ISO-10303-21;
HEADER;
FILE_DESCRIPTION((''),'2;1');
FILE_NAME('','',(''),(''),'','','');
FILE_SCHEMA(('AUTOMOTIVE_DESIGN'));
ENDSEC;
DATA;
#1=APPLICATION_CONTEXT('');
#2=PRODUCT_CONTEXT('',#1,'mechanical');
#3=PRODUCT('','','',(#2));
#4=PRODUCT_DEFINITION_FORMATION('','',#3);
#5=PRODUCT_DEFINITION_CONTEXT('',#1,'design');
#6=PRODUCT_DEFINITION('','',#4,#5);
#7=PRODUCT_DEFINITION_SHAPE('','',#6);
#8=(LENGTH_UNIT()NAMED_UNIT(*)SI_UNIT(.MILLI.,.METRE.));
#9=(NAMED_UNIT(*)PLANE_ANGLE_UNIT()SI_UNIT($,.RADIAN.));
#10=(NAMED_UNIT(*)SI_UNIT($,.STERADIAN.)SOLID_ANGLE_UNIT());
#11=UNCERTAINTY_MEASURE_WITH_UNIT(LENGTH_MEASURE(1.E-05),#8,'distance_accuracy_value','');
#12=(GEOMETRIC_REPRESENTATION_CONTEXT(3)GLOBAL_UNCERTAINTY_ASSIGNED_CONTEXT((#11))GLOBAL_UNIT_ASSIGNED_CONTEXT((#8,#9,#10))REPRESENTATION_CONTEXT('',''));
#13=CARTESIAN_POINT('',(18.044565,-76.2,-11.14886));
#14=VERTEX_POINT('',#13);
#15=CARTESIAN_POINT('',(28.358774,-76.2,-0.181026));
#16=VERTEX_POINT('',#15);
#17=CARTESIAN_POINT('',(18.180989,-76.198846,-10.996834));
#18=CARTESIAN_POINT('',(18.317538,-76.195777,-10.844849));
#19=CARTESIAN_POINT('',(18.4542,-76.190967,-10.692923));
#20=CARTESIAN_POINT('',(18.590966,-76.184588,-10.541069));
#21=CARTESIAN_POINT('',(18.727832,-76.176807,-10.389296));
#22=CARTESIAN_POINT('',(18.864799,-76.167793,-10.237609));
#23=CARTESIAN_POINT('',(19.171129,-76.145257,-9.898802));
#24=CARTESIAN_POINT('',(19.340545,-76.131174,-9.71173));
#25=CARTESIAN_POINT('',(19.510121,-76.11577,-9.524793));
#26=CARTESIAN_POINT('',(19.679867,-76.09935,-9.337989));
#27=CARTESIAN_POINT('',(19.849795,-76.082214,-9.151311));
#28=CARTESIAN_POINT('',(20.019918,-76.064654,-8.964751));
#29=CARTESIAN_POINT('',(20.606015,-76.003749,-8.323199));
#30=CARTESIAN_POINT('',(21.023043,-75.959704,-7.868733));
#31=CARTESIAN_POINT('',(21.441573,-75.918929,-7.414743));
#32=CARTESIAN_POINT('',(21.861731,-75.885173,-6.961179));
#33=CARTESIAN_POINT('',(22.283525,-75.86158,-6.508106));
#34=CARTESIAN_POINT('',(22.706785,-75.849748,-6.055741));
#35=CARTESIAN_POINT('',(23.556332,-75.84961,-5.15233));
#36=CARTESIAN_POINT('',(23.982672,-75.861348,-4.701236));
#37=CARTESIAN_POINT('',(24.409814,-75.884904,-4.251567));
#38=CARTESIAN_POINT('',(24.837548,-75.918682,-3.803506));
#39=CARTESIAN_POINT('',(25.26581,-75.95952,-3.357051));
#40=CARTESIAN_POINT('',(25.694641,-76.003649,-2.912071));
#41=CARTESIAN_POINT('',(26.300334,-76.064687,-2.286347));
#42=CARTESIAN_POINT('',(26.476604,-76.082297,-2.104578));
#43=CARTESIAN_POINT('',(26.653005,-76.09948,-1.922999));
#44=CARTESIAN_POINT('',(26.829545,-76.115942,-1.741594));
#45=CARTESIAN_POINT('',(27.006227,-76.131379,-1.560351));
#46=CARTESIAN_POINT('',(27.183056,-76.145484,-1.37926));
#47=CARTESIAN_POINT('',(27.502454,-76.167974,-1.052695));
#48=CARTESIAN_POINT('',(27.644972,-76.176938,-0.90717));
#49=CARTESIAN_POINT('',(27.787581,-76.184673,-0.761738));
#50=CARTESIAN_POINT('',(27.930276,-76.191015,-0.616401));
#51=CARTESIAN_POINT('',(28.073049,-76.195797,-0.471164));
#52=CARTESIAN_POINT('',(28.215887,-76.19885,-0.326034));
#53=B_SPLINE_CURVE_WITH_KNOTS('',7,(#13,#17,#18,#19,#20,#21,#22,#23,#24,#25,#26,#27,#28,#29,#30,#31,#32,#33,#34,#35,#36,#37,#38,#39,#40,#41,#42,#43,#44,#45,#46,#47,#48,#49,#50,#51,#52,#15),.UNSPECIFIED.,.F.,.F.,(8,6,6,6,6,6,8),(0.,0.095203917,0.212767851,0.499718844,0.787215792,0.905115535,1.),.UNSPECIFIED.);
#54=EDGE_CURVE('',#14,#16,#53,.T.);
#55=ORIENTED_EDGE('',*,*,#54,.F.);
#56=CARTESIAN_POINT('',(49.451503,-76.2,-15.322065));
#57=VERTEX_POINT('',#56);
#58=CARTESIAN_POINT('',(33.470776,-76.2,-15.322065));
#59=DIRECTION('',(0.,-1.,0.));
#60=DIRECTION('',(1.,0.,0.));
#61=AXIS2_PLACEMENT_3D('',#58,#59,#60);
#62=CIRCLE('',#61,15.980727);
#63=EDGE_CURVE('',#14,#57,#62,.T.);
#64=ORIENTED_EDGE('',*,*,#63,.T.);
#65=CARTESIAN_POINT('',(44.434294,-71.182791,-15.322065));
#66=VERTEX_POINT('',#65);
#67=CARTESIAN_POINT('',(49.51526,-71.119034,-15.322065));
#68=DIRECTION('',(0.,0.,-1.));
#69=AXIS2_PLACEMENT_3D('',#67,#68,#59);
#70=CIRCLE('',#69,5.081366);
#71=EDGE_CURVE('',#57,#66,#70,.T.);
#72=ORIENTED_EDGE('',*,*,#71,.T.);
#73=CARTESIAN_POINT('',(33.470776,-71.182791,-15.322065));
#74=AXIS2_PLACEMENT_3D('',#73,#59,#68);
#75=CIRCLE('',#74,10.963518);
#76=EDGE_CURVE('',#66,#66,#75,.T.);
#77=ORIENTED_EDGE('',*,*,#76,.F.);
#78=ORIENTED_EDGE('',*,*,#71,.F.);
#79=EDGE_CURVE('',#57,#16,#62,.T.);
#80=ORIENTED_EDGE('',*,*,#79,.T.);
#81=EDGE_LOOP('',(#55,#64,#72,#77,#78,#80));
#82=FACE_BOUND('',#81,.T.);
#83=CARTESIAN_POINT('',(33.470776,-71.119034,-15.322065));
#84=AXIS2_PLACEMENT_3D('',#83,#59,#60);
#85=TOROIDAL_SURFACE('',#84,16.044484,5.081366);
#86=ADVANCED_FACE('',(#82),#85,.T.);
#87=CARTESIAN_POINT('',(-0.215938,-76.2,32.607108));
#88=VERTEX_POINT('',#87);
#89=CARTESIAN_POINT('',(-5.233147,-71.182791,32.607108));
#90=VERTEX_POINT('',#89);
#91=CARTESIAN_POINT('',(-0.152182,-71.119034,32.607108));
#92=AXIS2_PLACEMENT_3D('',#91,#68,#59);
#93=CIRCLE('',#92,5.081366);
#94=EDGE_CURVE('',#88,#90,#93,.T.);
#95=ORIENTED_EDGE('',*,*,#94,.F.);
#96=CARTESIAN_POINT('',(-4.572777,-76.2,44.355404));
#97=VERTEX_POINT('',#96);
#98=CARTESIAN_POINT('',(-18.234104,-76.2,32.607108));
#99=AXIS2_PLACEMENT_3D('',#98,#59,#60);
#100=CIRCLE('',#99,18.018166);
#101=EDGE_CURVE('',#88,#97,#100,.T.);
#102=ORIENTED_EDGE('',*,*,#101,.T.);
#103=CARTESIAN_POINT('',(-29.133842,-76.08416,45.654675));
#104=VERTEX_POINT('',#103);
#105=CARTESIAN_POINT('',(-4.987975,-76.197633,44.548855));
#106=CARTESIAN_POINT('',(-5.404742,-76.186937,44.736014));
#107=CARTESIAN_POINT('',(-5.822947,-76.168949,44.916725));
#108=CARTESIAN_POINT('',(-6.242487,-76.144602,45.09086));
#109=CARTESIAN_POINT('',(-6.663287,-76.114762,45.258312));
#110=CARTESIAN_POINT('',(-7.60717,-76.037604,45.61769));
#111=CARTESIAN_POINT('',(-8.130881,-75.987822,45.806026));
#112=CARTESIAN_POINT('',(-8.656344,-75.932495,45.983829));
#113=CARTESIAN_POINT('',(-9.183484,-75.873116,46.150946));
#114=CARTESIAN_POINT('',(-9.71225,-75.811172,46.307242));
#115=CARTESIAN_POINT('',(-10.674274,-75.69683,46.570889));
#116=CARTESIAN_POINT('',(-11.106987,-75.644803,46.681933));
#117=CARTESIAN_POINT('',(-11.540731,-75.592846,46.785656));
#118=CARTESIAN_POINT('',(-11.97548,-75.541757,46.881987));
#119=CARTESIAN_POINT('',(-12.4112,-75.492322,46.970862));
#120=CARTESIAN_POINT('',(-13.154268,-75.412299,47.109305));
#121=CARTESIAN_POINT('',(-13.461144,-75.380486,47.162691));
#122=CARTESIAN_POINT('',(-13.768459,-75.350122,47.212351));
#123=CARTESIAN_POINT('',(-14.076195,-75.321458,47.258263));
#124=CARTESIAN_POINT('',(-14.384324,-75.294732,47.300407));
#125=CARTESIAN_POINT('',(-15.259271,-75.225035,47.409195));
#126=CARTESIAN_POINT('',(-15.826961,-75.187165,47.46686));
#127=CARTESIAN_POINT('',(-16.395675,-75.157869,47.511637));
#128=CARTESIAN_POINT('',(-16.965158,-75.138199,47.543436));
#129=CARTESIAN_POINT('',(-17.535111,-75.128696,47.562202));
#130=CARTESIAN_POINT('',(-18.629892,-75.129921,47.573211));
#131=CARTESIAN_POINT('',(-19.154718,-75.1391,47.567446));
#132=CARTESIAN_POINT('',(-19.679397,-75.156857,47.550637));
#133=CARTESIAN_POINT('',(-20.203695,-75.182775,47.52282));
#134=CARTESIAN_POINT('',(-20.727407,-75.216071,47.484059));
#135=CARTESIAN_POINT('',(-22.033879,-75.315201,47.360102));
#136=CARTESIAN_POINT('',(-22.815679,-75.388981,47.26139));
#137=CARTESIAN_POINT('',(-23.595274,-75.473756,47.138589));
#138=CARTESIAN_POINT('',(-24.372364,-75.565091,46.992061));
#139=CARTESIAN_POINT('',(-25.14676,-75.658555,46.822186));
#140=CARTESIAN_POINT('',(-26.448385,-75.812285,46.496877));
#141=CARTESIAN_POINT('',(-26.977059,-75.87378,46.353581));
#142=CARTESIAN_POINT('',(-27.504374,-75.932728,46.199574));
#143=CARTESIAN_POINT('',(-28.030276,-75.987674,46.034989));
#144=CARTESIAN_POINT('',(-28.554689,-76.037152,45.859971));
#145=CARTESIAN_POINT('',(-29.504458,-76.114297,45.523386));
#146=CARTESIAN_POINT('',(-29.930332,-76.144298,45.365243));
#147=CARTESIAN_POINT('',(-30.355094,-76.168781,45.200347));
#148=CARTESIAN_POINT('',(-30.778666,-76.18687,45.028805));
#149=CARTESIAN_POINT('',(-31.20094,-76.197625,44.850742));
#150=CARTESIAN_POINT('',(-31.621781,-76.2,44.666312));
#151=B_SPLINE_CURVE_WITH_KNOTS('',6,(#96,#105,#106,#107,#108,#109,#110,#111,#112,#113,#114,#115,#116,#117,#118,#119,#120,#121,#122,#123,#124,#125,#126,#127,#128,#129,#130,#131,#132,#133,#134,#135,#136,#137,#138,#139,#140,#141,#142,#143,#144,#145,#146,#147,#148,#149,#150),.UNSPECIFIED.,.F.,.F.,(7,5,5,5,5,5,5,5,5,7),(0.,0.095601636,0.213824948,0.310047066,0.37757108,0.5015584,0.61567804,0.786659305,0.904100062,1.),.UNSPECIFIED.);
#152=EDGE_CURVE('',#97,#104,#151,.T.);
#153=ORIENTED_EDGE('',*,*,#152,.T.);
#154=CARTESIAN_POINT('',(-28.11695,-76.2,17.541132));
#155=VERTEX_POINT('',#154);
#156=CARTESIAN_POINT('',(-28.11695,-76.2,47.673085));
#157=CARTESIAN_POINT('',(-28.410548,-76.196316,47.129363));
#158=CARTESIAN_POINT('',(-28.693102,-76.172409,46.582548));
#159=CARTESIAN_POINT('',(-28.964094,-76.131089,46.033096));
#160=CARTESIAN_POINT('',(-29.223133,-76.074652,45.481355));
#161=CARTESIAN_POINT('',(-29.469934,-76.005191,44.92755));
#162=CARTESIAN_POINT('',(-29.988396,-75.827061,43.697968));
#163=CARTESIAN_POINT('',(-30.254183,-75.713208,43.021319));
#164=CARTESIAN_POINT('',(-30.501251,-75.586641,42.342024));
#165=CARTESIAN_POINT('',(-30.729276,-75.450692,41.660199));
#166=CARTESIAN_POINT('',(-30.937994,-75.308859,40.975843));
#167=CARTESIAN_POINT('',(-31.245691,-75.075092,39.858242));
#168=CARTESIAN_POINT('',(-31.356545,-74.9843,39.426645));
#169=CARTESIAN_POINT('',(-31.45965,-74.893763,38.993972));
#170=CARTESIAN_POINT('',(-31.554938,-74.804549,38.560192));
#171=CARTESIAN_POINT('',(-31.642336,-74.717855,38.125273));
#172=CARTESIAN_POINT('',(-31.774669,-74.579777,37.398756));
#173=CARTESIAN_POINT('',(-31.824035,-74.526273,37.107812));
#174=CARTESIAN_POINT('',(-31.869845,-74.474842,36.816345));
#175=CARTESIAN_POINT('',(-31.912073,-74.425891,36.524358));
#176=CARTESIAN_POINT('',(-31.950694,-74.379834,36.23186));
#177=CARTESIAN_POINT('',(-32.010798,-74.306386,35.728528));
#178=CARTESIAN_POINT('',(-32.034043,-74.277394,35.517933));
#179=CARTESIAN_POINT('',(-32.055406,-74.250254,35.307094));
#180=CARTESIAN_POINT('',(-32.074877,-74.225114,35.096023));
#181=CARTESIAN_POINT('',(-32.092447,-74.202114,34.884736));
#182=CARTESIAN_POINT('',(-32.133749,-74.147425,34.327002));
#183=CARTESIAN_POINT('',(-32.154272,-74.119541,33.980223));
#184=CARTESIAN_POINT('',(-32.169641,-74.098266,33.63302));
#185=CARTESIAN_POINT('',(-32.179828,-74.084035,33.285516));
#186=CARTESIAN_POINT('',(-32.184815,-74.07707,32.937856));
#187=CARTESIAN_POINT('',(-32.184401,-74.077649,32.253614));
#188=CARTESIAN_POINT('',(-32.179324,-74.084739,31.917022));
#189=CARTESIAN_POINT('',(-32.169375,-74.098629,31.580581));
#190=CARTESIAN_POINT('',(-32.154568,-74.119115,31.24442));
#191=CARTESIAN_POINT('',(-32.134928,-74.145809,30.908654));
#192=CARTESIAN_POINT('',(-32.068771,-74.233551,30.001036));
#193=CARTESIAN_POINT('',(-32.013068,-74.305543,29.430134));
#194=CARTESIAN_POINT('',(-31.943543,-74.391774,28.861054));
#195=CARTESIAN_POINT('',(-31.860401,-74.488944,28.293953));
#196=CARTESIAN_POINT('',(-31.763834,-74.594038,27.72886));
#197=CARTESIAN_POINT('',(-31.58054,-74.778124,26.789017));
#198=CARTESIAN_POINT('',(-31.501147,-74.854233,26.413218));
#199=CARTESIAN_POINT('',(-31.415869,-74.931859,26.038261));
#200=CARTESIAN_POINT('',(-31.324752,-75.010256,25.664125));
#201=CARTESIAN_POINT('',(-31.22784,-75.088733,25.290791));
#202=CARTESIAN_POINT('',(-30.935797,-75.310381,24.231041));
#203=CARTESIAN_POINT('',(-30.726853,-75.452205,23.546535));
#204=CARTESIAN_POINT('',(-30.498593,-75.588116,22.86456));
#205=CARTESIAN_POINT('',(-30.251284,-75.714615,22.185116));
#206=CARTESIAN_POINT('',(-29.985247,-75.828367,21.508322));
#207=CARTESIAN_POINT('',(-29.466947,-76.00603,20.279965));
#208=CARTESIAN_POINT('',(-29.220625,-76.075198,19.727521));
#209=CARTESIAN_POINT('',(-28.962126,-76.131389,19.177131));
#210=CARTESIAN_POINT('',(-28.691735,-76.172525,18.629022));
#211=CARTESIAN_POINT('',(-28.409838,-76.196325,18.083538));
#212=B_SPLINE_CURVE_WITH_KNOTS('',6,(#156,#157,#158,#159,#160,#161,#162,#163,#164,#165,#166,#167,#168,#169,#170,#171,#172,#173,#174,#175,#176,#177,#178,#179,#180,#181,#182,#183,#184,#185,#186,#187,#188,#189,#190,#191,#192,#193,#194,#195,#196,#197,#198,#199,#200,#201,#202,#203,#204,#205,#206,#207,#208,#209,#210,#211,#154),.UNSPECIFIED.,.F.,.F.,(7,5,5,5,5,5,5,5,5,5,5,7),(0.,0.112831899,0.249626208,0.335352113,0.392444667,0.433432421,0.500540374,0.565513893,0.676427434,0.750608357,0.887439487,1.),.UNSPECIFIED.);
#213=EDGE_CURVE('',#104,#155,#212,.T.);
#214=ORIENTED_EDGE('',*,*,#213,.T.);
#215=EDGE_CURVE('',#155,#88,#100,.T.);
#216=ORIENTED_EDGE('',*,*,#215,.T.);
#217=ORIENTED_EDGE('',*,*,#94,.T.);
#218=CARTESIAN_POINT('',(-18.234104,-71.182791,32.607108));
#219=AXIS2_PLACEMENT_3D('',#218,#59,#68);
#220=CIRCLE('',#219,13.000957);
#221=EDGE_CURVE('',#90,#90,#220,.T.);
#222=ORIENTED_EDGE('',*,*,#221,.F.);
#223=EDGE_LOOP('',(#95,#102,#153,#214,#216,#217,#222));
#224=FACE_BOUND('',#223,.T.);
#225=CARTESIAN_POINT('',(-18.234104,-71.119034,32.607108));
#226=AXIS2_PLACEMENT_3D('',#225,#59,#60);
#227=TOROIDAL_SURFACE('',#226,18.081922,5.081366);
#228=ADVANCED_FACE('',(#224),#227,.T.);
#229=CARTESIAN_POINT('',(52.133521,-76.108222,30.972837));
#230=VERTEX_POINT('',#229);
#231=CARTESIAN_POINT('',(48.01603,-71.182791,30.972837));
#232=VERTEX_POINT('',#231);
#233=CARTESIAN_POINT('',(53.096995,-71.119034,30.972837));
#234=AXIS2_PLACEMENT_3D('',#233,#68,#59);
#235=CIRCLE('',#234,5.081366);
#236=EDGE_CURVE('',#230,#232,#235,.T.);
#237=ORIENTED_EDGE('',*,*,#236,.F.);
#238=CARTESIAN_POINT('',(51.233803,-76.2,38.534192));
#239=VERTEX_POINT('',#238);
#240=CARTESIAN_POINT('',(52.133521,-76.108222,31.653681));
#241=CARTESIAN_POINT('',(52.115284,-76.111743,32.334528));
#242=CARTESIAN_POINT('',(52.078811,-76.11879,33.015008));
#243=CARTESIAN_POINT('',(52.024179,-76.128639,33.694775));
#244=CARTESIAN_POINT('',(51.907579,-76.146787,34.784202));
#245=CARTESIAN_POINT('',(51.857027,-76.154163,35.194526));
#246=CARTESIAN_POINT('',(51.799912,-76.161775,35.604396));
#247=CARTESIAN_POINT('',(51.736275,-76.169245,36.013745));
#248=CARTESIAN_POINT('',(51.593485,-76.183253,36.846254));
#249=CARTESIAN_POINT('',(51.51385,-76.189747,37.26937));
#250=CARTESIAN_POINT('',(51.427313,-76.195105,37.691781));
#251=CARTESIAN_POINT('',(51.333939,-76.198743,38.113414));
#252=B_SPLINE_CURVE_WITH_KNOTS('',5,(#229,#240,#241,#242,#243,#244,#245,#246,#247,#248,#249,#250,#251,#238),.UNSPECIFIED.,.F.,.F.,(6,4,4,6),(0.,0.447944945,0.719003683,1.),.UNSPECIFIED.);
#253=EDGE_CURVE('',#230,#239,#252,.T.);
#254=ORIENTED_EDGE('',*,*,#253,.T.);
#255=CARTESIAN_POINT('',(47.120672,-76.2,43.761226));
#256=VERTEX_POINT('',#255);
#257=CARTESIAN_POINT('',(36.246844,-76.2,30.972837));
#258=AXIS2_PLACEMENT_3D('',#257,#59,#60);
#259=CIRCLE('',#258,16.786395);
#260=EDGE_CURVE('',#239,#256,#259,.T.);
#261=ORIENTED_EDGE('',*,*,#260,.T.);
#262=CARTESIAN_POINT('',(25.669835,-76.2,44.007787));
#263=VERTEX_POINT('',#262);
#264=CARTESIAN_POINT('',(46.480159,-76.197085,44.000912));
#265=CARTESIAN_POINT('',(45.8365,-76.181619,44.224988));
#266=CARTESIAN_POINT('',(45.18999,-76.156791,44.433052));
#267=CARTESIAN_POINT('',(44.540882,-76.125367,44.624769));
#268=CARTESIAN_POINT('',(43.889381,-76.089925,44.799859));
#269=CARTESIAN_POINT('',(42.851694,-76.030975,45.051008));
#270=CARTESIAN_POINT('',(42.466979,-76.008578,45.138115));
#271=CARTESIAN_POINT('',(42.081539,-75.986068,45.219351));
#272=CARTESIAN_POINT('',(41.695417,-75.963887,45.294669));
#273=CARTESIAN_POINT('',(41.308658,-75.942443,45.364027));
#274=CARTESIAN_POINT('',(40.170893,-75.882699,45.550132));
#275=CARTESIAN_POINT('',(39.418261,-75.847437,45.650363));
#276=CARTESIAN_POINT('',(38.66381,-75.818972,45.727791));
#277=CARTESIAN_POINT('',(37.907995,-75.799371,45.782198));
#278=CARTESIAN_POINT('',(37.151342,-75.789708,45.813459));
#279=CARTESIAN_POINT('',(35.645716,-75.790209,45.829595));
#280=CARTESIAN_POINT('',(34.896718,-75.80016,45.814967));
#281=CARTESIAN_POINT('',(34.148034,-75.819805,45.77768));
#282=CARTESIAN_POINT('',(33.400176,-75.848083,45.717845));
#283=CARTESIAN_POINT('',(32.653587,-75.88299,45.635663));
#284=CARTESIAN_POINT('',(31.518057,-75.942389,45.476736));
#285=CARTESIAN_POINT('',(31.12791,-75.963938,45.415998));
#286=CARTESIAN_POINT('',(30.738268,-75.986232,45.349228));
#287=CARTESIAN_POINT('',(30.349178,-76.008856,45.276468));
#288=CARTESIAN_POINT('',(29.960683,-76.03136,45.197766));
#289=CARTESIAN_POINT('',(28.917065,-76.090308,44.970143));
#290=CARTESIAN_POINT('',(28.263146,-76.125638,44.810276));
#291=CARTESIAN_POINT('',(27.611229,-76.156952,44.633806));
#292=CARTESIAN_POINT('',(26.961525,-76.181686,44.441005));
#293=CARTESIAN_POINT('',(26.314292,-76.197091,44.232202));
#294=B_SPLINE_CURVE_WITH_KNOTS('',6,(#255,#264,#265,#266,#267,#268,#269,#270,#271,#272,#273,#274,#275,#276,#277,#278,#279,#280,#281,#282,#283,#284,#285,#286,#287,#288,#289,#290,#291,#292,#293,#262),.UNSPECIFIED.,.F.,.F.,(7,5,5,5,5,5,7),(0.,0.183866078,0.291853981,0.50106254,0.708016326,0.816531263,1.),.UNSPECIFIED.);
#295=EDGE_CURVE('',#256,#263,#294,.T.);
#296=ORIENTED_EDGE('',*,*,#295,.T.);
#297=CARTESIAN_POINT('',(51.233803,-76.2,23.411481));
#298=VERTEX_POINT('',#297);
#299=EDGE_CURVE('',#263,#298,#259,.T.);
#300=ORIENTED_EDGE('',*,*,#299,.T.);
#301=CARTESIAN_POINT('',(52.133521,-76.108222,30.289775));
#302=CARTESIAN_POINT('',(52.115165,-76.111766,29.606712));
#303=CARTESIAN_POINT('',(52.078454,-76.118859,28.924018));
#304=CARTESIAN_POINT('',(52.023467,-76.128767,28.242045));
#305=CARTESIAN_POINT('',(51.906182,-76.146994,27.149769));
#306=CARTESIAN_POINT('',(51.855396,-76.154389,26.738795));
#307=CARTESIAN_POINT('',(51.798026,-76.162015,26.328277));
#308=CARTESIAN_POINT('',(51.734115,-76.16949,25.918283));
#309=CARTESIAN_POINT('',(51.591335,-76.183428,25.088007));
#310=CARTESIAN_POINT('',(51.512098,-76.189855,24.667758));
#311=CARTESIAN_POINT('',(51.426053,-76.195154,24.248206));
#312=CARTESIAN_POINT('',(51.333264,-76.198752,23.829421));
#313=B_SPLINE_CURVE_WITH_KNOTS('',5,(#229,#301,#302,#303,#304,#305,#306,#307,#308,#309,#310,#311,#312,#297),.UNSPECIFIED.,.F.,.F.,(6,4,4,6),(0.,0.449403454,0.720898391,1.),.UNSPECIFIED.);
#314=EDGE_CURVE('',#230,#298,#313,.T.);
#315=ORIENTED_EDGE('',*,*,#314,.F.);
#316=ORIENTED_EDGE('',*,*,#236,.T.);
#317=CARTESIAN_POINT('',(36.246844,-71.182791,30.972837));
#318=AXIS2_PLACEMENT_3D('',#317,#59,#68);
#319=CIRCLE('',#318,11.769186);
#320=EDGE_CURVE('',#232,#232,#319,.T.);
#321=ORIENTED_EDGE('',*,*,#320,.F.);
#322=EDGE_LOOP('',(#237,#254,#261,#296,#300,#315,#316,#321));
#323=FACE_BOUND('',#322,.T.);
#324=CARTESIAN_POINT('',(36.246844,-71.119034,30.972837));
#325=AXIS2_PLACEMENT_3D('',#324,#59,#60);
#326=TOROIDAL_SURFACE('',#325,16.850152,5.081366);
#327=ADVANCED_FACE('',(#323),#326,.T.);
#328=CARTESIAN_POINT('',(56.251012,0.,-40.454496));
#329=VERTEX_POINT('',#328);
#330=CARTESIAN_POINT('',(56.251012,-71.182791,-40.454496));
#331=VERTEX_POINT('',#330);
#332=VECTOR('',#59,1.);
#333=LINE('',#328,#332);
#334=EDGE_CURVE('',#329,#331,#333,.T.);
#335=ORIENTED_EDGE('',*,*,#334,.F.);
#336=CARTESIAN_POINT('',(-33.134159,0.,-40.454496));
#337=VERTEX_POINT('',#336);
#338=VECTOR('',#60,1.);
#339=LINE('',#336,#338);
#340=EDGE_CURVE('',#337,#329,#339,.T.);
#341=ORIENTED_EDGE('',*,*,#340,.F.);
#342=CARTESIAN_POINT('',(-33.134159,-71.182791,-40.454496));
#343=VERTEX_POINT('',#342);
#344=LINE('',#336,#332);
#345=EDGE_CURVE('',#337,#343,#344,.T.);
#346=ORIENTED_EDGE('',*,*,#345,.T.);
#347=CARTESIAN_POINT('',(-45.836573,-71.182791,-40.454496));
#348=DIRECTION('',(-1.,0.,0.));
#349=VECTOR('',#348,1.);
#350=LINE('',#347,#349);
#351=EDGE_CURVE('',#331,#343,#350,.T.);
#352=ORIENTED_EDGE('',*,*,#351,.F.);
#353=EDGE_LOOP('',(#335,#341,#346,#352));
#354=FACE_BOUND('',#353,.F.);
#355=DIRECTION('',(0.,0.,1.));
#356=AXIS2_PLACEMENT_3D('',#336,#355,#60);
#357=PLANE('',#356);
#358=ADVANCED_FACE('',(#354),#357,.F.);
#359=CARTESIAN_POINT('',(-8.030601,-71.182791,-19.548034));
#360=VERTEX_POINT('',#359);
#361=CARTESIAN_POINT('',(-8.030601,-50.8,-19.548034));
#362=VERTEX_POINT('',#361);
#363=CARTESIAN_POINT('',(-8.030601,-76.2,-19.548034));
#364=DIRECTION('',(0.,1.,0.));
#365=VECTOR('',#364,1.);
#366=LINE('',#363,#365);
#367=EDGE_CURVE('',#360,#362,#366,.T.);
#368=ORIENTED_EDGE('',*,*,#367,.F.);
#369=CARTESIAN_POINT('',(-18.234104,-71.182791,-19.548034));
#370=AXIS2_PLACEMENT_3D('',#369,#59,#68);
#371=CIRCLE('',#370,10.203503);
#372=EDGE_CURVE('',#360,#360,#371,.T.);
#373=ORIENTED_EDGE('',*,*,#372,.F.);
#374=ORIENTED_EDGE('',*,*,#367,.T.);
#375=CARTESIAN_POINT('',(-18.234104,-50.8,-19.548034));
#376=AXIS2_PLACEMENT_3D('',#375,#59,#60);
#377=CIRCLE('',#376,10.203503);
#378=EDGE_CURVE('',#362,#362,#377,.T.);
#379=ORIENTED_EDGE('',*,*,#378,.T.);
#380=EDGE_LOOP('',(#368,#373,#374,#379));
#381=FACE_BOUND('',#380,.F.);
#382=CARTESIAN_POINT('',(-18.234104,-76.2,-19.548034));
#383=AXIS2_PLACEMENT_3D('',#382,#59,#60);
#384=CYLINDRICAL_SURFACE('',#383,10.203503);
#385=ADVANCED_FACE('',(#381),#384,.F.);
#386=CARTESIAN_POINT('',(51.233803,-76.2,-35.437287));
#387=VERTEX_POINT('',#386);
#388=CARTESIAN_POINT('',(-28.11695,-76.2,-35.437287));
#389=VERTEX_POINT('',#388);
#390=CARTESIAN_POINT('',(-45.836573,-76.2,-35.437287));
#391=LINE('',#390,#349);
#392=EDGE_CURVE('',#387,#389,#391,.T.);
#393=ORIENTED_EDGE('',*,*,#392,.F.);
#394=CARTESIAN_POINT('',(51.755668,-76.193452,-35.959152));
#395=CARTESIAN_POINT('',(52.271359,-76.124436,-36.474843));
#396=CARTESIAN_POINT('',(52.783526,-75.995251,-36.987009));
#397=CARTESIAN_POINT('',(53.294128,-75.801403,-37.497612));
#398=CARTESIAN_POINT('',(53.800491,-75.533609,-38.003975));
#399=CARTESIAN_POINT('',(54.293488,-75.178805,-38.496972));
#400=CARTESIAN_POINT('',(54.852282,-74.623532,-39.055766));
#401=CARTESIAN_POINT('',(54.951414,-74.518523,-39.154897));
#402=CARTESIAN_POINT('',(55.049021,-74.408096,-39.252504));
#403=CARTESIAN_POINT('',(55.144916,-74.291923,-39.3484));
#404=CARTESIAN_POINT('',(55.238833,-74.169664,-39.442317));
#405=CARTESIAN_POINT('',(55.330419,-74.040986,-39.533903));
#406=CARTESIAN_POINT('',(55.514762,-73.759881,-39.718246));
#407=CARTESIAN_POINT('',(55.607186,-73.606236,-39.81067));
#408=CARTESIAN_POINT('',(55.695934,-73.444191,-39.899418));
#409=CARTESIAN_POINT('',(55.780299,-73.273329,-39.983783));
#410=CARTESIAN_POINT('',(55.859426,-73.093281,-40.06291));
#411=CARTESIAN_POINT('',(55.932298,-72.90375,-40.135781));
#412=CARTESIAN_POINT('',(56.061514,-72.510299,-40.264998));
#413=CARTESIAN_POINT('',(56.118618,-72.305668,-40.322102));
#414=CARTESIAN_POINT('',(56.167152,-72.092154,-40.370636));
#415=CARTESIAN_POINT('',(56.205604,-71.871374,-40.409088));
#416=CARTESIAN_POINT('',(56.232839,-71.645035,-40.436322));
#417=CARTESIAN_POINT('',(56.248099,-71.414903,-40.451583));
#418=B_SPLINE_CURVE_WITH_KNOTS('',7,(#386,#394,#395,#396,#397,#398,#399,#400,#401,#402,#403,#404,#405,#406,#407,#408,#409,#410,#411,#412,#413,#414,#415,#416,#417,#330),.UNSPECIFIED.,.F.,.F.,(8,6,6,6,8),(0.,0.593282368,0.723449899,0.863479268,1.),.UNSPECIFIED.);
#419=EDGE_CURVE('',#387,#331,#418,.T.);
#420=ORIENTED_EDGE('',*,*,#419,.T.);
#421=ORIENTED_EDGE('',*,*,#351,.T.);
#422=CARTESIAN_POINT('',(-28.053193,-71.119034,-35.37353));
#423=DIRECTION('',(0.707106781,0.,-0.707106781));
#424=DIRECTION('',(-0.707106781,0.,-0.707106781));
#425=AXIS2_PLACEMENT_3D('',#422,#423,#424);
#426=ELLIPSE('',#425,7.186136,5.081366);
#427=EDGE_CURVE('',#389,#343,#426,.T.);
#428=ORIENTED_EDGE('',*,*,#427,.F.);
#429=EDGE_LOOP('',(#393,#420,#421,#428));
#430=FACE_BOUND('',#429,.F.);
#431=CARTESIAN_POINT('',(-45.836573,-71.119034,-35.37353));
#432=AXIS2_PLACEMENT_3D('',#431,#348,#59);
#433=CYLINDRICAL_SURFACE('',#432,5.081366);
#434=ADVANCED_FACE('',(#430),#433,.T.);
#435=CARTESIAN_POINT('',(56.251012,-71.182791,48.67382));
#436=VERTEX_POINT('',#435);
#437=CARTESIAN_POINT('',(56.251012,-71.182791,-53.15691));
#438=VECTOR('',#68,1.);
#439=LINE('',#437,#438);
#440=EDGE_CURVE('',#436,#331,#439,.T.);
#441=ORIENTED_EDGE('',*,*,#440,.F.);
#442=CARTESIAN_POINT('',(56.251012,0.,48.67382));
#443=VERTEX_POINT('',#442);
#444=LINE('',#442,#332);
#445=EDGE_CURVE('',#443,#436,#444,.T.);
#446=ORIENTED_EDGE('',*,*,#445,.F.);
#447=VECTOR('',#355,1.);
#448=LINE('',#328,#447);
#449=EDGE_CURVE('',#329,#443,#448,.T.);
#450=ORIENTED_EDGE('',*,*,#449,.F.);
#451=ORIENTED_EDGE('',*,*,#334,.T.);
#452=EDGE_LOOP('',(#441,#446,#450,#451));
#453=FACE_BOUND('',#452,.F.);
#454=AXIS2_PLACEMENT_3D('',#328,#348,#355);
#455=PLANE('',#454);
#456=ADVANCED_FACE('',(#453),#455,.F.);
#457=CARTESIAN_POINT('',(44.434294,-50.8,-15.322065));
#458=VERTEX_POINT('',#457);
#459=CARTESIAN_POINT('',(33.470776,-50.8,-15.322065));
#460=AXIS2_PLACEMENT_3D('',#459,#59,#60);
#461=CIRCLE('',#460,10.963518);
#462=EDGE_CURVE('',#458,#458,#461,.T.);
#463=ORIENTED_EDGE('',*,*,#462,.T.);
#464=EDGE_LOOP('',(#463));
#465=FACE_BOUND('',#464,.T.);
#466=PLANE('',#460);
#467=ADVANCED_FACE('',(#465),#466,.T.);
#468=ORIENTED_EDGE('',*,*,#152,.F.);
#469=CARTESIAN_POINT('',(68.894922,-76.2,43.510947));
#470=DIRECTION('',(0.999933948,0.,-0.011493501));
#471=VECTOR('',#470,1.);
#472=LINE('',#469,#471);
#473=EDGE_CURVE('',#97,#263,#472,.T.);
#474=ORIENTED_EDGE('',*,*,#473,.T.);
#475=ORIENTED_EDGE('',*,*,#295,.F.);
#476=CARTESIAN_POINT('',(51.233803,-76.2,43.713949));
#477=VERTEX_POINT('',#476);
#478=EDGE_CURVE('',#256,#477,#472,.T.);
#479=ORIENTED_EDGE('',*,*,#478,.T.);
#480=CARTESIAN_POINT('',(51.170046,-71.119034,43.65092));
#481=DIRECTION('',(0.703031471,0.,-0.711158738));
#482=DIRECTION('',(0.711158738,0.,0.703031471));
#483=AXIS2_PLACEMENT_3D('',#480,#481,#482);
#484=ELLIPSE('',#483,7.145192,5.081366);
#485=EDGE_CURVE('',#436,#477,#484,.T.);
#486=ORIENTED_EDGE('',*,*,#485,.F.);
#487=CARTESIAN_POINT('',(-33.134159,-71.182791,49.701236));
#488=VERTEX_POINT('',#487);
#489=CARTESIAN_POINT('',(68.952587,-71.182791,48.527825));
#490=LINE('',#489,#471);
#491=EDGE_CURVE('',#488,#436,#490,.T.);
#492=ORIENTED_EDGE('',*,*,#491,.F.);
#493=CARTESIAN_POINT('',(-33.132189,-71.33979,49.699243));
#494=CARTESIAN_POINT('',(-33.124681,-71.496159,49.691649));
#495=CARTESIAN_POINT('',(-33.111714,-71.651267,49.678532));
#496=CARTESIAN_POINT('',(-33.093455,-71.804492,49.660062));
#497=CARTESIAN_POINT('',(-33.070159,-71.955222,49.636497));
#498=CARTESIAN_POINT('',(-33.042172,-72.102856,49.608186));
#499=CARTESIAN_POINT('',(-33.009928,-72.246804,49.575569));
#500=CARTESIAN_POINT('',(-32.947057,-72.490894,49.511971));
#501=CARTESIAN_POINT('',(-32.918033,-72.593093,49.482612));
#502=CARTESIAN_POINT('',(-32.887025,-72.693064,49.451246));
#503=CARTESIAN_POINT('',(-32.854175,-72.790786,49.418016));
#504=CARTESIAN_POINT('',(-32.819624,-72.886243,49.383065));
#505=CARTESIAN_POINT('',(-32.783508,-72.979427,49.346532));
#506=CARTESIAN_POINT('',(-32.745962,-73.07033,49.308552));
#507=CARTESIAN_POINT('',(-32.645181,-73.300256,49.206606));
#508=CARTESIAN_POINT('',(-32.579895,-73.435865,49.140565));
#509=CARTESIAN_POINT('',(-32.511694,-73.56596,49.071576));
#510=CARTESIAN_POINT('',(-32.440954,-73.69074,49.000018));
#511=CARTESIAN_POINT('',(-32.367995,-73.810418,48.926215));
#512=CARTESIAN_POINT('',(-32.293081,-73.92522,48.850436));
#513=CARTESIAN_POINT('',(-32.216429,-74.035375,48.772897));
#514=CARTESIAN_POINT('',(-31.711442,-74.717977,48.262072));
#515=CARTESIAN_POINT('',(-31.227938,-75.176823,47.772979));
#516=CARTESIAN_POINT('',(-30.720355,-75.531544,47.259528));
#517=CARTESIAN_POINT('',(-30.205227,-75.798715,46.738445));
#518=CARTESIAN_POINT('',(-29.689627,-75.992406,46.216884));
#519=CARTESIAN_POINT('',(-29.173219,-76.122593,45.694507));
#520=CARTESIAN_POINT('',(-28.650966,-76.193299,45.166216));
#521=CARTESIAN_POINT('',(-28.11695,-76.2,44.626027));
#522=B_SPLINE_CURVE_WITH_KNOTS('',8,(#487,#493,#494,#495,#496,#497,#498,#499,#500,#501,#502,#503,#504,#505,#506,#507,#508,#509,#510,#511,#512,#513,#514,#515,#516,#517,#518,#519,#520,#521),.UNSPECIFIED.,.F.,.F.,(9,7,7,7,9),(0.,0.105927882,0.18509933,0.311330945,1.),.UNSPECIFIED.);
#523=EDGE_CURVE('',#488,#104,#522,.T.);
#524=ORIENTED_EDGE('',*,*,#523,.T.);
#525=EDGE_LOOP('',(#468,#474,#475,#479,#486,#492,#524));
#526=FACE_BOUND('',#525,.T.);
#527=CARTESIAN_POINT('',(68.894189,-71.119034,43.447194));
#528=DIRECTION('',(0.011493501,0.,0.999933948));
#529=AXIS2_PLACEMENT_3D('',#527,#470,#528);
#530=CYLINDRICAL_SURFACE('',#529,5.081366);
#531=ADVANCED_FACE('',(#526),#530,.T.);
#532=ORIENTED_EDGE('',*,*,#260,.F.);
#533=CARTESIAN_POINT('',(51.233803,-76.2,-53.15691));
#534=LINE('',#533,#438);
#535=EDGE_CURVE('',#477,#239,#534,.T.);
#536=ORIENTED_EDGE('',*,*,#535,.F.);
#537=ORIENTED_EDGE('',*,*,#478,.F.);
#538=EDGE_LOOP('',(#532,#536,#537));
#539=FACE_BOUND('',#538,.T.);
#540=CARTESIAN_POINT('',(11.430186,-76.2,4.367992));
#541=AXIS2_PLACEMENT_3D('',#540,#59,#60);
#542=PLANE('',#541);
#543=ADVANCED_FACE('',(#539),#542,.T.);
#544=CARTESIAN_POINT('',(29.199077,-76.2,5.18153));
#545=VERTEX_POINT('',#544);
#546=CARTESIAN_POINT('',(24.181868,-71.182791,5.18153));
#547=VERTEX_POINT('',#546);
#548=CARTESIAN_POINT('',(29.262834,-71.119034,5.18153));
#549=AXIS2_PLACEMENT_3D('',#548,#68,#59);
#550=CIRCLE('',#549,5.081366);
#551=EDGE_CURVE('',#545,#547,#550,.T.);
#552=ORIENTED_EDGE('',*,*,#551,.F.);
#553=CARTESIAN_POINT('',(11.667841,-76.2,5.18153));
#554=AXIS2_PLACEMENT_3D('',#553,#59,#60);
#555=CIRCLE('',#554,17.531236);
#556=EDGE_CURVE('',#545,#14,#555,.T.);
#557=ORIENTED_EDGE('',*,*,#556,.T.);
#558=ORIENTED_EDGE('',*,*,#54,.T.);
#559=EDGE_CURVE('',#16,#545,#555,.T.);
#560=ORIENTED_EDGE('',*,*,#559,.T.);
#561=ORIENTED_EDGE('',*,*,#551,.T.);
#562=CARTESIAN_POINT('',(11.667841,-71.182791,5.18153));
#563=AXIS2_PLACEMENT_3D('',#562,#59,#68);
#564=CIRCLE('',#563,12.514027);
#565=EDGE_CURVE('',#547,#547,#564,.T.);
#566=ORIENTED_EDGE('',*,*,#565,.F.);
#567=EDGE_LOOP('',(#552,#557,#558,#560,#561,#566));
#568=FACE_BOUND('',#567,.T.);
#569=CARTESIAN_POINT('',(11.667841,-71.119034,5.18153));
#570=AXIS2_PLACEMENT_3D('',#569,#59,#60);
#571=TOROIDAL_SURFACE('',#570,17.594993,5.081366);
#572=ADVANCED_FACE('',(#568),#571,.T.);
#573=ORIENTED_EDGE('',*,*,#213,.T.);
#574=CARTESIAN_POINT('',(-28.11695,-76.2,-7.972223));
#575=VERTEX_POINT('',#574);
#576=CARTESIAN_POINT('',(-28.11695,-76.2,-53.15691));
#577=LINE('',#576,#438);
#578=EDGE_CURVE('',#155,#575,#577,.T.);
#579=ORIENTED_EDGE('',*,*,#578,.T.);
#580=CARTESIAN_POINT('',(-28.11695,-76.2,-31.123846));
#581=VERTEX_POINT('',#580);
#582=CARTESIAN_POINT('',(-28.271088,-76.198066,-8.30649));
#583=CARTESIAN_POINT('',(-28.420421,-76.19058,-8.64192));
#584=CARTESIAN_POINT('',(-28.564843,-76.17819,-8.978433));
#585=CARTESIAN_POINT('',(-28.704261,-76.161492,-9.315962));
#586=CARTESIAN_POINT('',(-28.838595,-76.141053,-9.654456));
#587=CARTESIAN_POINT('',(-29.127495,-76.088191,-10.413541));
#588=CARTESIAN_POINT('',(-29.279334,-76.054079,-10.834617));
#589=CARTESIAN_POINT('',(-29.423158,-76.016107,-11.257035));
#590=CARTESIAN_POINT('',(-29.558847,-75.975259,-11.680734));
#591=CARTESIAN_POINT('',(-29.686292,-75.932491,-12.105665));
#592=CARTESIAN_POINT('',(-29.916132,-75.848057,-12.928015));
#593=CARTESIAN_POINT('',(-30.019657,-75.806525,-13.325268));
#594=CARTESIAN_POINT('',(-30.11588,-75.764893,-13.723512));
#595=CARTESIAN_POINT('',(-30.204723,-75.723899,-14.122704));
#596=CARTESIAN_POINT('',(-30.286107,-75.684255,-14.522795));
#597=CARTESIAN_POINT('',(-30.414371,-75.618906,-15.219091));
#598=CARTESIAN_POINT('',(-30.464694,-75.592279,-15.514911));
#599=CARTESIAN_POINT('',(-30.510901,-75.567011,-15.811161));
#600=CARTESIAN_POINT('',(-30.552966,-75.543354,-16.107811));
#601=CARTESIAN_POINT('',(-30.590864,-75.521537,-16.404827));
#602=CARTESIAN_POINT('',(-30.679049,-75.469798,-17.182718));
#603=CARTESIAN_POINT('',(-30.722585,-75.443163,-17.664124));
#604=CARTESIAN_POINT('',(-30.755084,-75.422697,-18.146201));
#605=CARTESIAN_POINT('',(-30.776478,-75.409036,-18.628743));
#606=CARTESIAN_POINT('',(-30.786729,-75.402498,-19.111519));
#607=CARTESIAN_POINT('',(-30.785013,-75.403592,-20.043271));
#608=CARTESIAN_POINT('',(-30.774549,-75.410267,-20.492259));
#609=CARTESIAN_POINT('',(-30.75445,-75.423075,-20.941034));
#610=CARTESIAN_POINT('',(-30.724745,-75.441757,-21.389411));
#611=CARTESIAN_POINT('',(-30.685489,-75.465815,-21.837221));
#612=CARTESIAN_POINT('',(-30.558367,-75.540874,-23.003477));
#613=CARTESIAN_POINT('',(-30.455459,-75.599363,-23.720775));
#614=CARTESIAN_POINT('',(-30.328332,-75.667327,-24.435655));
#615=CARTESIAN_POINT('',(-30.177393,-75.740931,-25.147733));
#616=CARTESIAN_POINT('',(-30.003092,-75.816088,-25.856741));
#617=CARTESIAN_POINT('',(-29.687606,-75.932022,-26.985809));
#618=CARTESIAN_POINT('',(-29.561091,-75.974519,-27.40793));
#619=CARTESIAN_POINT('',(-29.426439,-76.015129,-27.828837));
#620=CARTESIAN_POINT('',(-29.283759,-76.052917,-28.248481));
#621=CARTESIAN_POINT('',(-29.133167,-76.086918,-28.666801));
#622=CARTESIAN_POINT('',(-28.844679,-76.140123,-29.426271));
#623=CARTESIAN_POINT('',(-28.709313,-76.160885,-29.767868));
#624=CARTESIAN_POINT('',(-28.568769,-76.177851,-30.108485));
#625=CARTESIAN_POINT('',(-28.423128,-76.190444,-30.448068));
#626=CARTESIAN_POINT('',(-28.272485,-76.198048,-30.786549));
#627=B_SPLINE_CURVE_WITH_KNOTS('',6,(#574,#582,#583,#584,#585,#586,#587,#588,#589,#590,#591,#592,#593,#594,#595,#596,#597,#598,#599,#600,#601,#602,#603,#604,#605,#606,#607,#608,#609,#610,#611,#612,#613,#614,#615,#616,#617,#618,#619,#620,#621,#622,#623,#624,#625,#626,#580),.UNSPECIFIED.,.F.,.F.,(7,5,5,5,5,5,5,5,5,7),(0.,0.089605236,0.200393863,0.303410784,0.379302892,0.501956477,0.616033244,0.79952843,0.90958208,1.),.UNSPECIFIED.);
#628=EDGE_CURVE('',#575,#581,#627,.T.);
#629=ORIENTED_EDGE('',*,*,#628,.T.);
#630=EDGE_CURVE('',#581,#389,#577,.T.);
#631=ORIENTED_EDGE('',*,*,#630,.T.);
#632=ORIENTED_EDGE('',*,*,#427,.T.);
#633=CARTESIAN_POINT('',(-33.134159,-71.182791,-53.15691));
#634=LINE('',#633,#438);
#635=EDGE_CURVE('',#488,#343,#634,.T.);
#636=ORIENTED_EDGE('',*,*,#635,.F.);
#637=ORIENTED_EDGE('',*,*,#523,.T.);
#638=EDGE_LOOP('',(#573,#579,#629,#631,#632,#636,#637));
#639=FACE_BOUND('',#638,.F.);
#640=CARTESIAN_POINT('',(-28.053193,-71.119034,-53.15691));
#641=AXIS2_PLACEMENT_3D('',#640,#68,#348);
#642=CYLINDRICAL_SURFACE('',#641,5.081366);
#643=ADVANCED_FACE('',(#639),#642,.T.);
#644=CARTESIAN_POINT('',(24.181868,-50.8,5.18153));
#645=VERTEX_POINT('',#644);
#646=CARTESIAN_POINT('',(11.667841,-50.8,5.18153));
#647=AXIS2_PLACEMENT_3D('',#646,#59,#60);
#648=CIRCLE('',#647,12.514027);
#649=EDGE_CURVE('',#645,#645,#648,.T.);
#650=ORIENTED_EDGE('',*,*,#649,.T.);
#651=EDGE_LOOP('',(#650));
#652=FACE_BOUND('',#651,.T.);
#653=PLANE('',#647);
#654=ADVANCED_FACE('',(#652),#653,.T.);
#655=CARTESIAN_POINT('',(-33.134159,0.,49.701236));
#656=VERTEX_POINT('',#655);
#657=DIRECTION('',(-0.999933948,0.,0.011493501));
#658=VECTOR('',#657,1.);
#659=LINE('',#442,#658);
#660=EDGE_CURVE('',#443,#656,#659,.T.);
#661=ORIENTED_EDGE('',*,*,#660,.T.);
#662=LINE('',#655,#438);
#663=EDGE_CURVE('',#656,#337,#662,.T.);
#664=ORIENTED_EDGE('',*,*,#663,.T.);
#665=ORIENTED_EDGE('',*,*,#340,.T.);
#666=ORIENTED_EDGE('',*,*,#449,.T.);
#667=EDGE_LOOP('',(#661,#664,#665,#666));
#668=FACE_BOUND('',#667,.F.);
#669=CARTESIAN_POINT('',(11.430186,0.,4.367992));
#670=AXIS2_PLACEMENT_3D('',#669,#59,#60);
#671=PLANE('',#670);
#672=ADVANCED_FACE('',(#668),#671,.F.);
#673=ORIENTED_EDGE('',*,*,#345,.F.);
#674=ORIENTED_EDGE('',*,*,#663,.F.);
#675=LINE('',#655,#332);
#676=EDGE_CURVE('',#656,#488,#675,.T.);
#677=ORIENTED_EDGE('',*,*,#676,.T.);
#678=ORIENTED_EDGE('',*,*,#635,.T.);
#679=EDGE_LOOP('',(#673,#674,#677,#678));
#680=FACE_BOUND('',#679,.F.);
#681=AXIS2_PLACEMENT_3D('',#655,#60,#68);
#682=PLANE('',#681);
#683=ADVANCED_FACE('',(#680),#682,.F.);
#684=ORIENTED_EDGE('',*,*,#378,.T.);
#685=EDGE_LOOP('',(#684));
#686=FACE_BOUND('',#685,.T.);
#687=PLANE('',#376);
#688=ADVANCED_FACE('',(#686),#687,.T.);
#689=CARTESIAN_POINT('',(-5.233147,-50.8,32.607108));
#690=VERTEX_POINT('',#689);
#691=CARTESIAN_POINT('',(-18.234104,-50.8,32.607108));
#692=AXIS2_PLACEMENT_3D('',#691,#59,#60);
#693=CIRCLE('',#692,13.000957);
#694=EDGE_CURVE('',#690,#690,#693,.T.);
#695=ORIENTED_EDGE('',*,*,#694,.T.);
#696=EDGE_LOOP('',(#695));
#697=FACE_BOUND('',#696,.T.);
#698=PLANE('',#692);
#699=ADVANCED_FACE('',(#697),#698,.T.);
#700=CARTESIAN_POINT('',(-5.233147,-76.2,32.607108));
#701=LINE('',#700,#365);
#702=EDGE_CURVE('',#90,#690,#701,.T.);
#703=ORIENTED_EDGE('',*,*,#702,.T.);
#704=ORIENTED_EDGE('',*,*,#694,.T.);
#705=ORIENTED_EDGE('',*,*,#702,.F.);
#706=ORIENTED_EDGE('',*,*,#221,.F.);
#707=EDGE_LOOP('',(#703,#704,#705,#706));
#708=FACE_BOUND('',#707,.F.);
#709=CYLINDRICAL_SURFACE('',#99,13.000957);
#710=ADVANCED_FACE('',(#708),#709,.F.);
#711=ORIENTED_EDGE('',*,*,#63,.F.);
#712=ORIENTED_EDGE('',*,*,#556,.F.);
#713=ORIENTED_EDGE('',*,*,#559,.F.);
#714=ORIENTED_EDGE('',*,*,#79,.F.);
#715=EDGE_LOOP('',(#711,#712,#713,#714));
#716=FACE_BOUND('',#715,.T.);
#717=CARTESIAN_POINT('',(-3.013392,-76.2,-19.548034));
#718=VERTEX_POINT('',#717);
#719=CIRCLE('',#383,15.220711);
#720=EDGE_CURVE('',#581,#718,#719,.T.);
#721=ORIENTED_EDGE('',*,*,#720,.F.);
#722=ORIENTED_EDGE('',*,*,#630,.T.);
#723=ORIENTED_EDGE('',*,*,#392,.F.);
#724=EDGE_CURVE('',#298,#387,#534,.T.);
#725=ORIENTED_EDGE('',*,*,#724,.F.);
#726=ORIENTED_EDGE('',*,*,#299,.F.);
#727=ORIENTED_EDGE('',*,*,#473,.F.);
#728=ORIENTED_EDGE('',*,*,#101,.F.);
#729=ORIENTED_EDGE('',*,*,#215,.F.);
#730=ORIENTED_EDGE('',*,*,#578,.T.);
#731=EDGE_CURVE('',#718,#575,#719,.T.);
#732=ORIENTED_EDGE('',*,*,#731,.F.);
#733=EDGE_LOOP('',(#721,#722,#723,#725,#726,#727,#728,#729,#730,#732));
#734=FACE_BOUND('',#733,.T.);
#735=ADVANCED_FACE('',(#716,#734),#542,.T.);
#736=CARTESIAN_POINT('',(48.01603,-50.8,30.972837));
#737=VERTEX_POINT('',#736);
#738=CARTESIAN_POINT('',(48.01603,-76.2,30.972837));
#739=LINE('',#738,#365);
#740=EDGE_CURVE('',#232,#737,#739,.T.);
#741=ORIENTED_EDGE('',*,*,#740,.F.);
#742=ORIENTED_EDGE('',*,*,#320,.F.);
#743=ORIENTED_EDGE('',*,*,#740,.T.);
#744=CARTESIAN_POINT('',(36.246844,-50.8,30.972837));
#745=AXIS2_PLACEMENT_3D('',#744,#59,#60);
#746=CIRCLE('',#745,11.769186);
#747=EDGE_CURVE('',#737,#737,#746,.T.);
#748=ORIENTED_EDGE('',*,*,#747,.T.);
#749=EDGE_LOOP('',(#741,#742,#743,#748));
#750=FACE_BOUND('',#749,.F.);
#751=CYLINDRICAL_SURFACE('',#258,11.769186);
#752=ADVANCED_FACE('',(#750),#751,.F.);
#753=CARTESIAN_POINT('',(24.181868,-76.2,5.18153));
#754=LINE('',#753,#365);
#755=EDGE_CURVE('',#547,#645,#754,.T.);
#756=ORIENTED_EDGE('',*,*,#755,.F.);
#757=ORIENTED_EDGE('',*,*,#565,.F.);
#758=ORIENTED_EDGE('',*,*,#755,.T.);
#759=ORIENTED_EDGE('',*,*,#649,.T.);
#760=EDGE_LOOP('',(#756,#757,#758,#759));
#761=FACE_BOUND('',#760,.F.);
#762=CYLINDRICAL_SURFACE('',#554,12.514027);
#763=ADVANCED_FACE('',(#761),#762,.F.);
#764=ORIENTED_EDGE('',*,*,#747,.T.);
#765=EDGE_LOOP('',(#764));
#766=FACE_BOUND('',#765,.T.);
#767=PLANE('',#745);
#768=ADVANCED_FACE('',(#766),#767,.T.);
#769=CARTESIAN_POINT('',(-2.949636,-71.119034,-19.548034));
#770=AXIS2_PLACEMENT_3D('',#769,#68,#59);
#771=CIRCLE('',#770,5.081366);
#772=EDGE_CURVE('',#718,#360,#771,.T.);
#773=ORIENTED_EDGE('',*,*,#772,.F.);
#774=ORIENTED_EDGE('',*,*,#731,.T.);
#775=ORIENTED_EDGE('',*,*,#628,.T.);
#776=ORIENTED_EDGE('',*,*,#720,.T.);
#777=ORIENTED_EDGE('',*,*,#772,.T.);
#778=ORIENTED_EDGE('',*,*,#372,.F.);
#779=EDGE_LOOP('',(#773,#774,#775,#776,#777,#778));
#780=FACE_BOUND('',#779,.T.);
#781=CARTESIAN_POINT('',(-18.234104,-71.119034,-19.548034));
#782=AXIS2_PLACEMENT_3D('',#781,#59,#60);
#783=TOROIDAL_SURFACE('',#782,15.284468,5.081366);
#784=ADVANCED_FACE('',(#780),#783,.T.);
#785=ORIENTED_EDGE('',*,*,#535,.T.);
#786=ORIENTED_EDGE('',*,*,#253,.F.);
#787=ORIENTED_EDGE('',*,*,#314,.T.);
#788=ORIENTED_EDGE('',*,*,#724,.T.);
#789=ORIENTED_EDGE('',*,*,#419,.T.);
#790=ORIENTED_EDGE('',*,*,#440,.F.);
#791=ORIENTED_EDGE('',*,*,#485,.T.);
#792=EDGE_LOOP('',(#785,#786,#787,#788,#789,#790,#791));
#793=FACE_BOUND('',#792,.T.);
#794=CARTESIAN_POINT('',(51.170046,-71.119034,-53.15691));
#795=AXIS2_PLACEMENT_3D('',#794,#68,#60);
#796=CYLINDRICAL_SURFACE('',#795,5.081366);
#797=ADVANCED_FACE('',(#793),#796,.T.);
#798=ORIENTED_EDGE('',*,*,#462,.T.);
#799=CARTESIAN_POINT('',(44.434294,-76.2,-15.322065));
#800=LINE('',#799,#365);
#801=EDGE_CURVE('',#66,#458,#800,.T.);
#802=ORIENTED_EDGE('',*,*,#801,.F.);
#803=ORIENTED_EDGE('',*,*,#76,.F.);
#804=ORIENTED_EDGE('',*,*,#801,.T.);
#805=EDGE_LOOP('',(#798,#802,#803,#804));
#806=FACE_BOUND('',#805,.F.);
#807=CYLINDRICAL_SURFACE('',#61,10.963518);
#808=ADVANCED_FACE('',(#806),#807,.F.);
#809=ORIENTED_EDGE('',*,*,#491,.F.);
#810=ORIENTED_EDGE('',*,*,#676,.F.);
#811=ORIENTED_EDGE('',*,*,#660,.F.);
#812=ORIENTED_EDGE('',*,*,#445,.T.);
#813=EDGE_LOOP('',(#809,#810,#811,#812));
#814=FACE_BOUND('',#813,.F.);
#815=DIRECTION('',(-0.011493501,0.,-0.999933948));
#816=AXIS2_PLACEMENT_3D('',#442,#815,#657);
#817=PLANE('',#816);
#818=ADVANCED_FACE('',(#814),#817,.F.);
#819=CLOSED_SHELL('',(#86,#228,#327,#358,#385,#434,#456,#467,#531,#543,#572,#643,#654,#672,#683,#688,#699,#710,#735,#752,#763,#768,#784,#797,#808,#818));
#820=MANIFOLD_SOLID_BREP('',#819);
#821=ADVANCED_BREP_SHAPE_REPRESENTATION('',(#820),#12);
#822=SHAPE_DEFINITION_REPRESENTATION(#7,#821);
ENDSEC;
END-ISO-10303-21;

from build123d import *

# Parameters (mm, degrees)
F1_DEPTH    = 76.2
F2_R        = 13.0009566934
F2_R_2      = 11.7691858669
F2_R_3      = 12.5140273394
F2_R_4      = 10.2035026267
F2_R_5      = 10.9635179416
F4_DEPTH    = 25.4
F5_T1_DEPTH = 114.7959034965
F5_T3_DEPTH = 114.5331439546
F5_T5_DEPTH = 115.5605603925
F5_T7_DEPTH = 114.7899989954


# Not quite as in the source:
# - a fillet or chamfer that OpenCascade refuses, or shapes differently, is made with other operations: its cross-section is extruded or revolved along the edge and cut away or added


with BuildPart() as f1:
    # F0 (on Front) → F1 (new body)
    with BuildSketch(Plane.XZ):
        Polygon((56.2510117888, 48.6738197505), (-33.1341587007, 49.7012361884), (-33.1341587007, -40.4544956982), (56.2510117888, -40.4544956982), align=None)
    extrude(amount=F1_DEPTH)

    # F2 (on face) → F4 (cut)
    with BuildSketch(Plane.XZ.offset(76.2)):
        with Locations((-18.2341039181, 32.6071083546)):
            Circle(F2_R)
        with Locations((36.246843636, 30.9728365391)):
            Circle(F2_R_2)
        with Locations((11.6678411141, 5.1815295592)):
            Circle(F2_R_3)
        with Locations((-18.2341039181, -19.5480342954)):
            Circle(F2_R_4)
        with Locations((33.4707759321, -15.3220649809)):
            Circle(F2_R_5)
    extrude(amount=-F4_DEPTH, mode=Mode.SUBTRACT)

    # F5: fillet of radius 5.08 on 9 edges, made by hand

    # F5_s2 → F5_t1 (cut)
    with BuildSketch(Plane(origin=(68.3857605657, 0, -0.7860437491), x_dir=(0, 1, 0), z_dir=(-0.9999339475, 0, 0.0114935013))):
        with BuildLine():
            ThreePointArc((-71.1190343146, -49.3175258025), (-74.7121024484, -47.829228251), (-76.2004, -44.2361601171))
            Line((-76.2004, -44.2361601171), (-76.7085365685, -44.2361601171))
            ThreePointArc((-76.7085365685, -44.2361601171), (-76.7081365685, -46.7766429598), (-76.7081365685, -49.3171258025))
            Line((-76.7081365685, -49.3171258025), (-76.2, -49.8252623711))
            ThreePointArc((-76.2, -49.8252623711), (-73.6595171573, -49.8252623711), (-71.1190343146, -49.8256623711))
            Line((-71.1190343146, -49.8256623711), (-71.1190343146, -49.3175258025))
        make_face()
    extrude(amount=F5_T1_DEPTH, mode=Mode.SUBTRACT)

    # F5_s4 → F5_t3 (cut)
    with BuildSketch(Plane.XY.offset(-53.1569099511)):
        with BuildLine():
            ThreePointArc((56.2514117888, -71.1190343146), (54.7631142373, -74.7121024484), (51.1700461034, -76.2004))
            Line((51.1700461034, -76.2004), (51.1700461034, -76.7085365685))
            ThreePointArc((51.1700461034, -76.7085365685), (53.7105289461, -76.7081365685), (56.2510117888, -76.7081365685))
            Line((56.2510117888, -76.7081365685), (56.7591483574, -76.2))
            ThreePointArc((56.7591483574, -76.2), (56.7591483574, -73.6595171573), (56.7595483574, -71.1190343146))
            Line((56.7595483574, -71.1190343146), (56.2514117888, -71.1190343146))
        make_face()
    extrude(amount=F5_T3_DEPTH, mode=Mode.SUBTRACT)

    # F5_s6 → F5_t5 (cut)
    with BuildSketch(Plane.XY.offset(-53.1569099511)):
        with BuildLine():
            ThreePointArc((-33.1345587007, -71.1190343146), (-31.6462611491, -74.7121024484), (-28.0531930153, -76.2004))
            Line((-28.0531930153, -76.2004), (-28.0531930153, -76.7085365685))
            ThreePointArc((-28.0531930153, -76.7085365685), (-30.593675858, -76.7081365685), (-33.1341587007, -76.7081365685))
            Line((-33.1341587007, -76.7081365685), (-33.6422952692, -76.2))
            ThreePointArc((-33.6422952692, -76.2), (-33.6422952692, -73.6595171573), (-33.6426952692, -71.1190343146))
            Line((-33.6426952692, -71.1190343146), (-33.1345587007, -71.1190343146))
        make_face()
    extrude(amount=F5_T5_DEPTH, mode=Mode.SUBTRACT)

    # F5_s8 → F5_t7 (cut)
    with BuildSketch(Plane.YZ.offset(-45.8365729536)):
        with BuildLine():
            ThreePointArc((-76.2004, -35.3735300128), (-74.7121024484, -38.9665981466), (-71.1190343146, -40.4548956982))
            Line((-71.1190343146, -40.4548956982), (-71.1190343146, -40.9630322668))
            ThreePointArc((-71.1190343146, -40.9630322668), (-73.6595171573, -40.9626322668), (-76.2, -40.9626322668))
            Line((-76.2, -40.9626322668), (-76.7081365685, -40.4544956982))
            ThreePointArc((-76.7081365685, -40.4544956982), (-76.7081365685, -37.9140128555), (-76.7085365685, -35.3735300128))
            Line((-76.7085365685, -35.3735300128), (-76.2004, -35.3735300128))
        make_face()
    extrude(amount=F5_T7_DEPTH, mode=Mode.SUBTRACT)

    # F5_s9 → F5_t10 (revolve, cut)
    with BuildSketch(Plane.XY.offset(-19.5480342954)):
        with BuildLine():
            ThreePointArc((-2.949635606, -76.2004), (-6.5427037398, -74.7121024484), (-8.0310012914, -71.1190343146))
            Line((-8.0310012914, -71.1190343146), (-8.53913786, -71.1190343146))
            ThreePointArc((-8.53913786, -71.1190343146), (-8.53873786, -73.6595171573), (-8.53873786, -76.2))
            Line((-8.53873786, -76.2), (-8.0306012914, -76.7081365685))
            ThreePointArc((-8.0306012914, -76.7081365685), (-5.4901184487, -76.7081365685), (-2.949635606, -76.7085365685))
            Line((-2.949635606, -76.7085365685), (-2.949635606, -76.2004))
        make_face()
    revolve(axis=Axis((-18.2341039181, -76.2, -19.5480342954), (0, -1, 0)), mode=Mode.SUBTRACT)

    # F5_s11 → F5_t12 (revolve, cut)
    with BuildSketch(Plane.XY.offset(-15.3220649809)):
        with BuildLine():
            ThreePointArc((49.5152595591, -76.2004), (45.9221914252, -74.7121024484), (44.4338938736, -71.1190343146))
            Line((44.4338938736, -71.1190343146), (43.9257573051, -71.1190343146))
            ThreePointArc((43.9257573051, -71.1190343146), (43.9261573051, -73.6595171573), (43.9261573051, -76.2))
            Line((43.9261573051, -76.2), (44.4342938736, -76.7081365685))
            ThreePointArc((44.4342938736, -76.7081365685), (46.9747767164, -76.7081365685), (49.5152595591, -76.7085365685))
            Line((49.5152595591, -76.7085365685), (49.5152595591, -76.2004))
        make_face()
    revolve(axis=Axis((33.4707759321, -76.2, -15.3220649809), (0, -1, 0)), mode=Mode.SUBTRACT)

    # F5_s13 → F5_t14 (revolve, cut)
    with BuildSketch(Plane.XY.offset(5.1815295592)):
        with BuildLine():
            ThreePointArc((29.2628341389, -76.2004), (25.6697660051, -74.7121024484), (24.1814684535, -71.1190343146))
            Line((24.1814684535, -71.1190343146), (23.673331885, -71.1190343146))
            ThreePointArc((23.673331885, -71.1190343146), (23.673731885, -73.6595171573), (23.673731885, -76.2))
            Line((23.673731885, -76.2), (24.1818684535, -76.7081365685))
            ThreePointArc((24.1818684535, -76.7081365685), (26.7223512962, -76.7081365685), (29.2628341389, -76.7085365685))
            Line((29.2628341389, -76.7085365685), (29.2628341389, -76.2004))
        make_face()
    revolve(axis=Axis((11.6678411141, -76.2, 5.1815295592), (0, -1, 0)), mode=Mode.SUBTRACT)

    # F5_s15 → F5_t16 (revolve, cut)
    with BuildSketch(Plane.XY.offset(32.6071083546)):
        with BuildLine():
            ThreePointArc((-0.1521815393, -76.2004), (-3.7452496731, -74.7121024484), (-5.2335472247, -71.1190343146))
            Line((-5.2335472247, -71.1190343146), (-5.7416837932, -71.1190343146))
            ThreePointArc((-5.7416837932, -71.1190343146), (-5.7412837932, -73.6595171573), (-5.7412837932, -76.2))
            Line((-5.7412837932, -76.2), (-5.2331472247, -76.7081365685))
            ThreePointArc((-5.2331472247, -76.7081365685), (-2.692664382, -76.7081365685), (-0.1521815393, -76.7085365685))
            Line((-0.1521815393, -76.7085365685), (-0.1521815393, -76.2004))
        make_face()
    revolve(axis=Axis((-18.2341039181, -76.2, 32.6071083546), (0, -1, 0)), mode=Mode.SUBTRACT)

    # F5_s17 → F5_t18 (revolve, cut)
    with BuildSketch(Plane.XY.offset(30.9728365391)):
        with BuildLine():
            ThreePointArc((53.0969951883, -76.2004), (49.5039270545, -74.7121024484), (48.0156295029, -71.1190343146))
            Line((48.0156295029, -71.1190343146), (47.5074929344, -71.1190343146))
            ThreePointArc((47.5074929344, -71.1190343146), (47.5078929344, -73.6595171573), (47.5078929344, -76.2))
            Line((47.5078929344, -76.2), (48.0160295029, -76.7081365685))
            ThreePointArc((48.0160295029, -76.7081365685), (50.5565123456, -76.7081365685), (53.0969951883, -76.7085365685))
            Line((53.0969951883, -76.7085365685), (53.0969951883, -76.2004))
        make_face()
    revolve(axis=Axis((36.246843636, -76.2, 30.9728365391), (0, -1, 0)), mode=Mode.SUBTRACT)


solid = f1.part
